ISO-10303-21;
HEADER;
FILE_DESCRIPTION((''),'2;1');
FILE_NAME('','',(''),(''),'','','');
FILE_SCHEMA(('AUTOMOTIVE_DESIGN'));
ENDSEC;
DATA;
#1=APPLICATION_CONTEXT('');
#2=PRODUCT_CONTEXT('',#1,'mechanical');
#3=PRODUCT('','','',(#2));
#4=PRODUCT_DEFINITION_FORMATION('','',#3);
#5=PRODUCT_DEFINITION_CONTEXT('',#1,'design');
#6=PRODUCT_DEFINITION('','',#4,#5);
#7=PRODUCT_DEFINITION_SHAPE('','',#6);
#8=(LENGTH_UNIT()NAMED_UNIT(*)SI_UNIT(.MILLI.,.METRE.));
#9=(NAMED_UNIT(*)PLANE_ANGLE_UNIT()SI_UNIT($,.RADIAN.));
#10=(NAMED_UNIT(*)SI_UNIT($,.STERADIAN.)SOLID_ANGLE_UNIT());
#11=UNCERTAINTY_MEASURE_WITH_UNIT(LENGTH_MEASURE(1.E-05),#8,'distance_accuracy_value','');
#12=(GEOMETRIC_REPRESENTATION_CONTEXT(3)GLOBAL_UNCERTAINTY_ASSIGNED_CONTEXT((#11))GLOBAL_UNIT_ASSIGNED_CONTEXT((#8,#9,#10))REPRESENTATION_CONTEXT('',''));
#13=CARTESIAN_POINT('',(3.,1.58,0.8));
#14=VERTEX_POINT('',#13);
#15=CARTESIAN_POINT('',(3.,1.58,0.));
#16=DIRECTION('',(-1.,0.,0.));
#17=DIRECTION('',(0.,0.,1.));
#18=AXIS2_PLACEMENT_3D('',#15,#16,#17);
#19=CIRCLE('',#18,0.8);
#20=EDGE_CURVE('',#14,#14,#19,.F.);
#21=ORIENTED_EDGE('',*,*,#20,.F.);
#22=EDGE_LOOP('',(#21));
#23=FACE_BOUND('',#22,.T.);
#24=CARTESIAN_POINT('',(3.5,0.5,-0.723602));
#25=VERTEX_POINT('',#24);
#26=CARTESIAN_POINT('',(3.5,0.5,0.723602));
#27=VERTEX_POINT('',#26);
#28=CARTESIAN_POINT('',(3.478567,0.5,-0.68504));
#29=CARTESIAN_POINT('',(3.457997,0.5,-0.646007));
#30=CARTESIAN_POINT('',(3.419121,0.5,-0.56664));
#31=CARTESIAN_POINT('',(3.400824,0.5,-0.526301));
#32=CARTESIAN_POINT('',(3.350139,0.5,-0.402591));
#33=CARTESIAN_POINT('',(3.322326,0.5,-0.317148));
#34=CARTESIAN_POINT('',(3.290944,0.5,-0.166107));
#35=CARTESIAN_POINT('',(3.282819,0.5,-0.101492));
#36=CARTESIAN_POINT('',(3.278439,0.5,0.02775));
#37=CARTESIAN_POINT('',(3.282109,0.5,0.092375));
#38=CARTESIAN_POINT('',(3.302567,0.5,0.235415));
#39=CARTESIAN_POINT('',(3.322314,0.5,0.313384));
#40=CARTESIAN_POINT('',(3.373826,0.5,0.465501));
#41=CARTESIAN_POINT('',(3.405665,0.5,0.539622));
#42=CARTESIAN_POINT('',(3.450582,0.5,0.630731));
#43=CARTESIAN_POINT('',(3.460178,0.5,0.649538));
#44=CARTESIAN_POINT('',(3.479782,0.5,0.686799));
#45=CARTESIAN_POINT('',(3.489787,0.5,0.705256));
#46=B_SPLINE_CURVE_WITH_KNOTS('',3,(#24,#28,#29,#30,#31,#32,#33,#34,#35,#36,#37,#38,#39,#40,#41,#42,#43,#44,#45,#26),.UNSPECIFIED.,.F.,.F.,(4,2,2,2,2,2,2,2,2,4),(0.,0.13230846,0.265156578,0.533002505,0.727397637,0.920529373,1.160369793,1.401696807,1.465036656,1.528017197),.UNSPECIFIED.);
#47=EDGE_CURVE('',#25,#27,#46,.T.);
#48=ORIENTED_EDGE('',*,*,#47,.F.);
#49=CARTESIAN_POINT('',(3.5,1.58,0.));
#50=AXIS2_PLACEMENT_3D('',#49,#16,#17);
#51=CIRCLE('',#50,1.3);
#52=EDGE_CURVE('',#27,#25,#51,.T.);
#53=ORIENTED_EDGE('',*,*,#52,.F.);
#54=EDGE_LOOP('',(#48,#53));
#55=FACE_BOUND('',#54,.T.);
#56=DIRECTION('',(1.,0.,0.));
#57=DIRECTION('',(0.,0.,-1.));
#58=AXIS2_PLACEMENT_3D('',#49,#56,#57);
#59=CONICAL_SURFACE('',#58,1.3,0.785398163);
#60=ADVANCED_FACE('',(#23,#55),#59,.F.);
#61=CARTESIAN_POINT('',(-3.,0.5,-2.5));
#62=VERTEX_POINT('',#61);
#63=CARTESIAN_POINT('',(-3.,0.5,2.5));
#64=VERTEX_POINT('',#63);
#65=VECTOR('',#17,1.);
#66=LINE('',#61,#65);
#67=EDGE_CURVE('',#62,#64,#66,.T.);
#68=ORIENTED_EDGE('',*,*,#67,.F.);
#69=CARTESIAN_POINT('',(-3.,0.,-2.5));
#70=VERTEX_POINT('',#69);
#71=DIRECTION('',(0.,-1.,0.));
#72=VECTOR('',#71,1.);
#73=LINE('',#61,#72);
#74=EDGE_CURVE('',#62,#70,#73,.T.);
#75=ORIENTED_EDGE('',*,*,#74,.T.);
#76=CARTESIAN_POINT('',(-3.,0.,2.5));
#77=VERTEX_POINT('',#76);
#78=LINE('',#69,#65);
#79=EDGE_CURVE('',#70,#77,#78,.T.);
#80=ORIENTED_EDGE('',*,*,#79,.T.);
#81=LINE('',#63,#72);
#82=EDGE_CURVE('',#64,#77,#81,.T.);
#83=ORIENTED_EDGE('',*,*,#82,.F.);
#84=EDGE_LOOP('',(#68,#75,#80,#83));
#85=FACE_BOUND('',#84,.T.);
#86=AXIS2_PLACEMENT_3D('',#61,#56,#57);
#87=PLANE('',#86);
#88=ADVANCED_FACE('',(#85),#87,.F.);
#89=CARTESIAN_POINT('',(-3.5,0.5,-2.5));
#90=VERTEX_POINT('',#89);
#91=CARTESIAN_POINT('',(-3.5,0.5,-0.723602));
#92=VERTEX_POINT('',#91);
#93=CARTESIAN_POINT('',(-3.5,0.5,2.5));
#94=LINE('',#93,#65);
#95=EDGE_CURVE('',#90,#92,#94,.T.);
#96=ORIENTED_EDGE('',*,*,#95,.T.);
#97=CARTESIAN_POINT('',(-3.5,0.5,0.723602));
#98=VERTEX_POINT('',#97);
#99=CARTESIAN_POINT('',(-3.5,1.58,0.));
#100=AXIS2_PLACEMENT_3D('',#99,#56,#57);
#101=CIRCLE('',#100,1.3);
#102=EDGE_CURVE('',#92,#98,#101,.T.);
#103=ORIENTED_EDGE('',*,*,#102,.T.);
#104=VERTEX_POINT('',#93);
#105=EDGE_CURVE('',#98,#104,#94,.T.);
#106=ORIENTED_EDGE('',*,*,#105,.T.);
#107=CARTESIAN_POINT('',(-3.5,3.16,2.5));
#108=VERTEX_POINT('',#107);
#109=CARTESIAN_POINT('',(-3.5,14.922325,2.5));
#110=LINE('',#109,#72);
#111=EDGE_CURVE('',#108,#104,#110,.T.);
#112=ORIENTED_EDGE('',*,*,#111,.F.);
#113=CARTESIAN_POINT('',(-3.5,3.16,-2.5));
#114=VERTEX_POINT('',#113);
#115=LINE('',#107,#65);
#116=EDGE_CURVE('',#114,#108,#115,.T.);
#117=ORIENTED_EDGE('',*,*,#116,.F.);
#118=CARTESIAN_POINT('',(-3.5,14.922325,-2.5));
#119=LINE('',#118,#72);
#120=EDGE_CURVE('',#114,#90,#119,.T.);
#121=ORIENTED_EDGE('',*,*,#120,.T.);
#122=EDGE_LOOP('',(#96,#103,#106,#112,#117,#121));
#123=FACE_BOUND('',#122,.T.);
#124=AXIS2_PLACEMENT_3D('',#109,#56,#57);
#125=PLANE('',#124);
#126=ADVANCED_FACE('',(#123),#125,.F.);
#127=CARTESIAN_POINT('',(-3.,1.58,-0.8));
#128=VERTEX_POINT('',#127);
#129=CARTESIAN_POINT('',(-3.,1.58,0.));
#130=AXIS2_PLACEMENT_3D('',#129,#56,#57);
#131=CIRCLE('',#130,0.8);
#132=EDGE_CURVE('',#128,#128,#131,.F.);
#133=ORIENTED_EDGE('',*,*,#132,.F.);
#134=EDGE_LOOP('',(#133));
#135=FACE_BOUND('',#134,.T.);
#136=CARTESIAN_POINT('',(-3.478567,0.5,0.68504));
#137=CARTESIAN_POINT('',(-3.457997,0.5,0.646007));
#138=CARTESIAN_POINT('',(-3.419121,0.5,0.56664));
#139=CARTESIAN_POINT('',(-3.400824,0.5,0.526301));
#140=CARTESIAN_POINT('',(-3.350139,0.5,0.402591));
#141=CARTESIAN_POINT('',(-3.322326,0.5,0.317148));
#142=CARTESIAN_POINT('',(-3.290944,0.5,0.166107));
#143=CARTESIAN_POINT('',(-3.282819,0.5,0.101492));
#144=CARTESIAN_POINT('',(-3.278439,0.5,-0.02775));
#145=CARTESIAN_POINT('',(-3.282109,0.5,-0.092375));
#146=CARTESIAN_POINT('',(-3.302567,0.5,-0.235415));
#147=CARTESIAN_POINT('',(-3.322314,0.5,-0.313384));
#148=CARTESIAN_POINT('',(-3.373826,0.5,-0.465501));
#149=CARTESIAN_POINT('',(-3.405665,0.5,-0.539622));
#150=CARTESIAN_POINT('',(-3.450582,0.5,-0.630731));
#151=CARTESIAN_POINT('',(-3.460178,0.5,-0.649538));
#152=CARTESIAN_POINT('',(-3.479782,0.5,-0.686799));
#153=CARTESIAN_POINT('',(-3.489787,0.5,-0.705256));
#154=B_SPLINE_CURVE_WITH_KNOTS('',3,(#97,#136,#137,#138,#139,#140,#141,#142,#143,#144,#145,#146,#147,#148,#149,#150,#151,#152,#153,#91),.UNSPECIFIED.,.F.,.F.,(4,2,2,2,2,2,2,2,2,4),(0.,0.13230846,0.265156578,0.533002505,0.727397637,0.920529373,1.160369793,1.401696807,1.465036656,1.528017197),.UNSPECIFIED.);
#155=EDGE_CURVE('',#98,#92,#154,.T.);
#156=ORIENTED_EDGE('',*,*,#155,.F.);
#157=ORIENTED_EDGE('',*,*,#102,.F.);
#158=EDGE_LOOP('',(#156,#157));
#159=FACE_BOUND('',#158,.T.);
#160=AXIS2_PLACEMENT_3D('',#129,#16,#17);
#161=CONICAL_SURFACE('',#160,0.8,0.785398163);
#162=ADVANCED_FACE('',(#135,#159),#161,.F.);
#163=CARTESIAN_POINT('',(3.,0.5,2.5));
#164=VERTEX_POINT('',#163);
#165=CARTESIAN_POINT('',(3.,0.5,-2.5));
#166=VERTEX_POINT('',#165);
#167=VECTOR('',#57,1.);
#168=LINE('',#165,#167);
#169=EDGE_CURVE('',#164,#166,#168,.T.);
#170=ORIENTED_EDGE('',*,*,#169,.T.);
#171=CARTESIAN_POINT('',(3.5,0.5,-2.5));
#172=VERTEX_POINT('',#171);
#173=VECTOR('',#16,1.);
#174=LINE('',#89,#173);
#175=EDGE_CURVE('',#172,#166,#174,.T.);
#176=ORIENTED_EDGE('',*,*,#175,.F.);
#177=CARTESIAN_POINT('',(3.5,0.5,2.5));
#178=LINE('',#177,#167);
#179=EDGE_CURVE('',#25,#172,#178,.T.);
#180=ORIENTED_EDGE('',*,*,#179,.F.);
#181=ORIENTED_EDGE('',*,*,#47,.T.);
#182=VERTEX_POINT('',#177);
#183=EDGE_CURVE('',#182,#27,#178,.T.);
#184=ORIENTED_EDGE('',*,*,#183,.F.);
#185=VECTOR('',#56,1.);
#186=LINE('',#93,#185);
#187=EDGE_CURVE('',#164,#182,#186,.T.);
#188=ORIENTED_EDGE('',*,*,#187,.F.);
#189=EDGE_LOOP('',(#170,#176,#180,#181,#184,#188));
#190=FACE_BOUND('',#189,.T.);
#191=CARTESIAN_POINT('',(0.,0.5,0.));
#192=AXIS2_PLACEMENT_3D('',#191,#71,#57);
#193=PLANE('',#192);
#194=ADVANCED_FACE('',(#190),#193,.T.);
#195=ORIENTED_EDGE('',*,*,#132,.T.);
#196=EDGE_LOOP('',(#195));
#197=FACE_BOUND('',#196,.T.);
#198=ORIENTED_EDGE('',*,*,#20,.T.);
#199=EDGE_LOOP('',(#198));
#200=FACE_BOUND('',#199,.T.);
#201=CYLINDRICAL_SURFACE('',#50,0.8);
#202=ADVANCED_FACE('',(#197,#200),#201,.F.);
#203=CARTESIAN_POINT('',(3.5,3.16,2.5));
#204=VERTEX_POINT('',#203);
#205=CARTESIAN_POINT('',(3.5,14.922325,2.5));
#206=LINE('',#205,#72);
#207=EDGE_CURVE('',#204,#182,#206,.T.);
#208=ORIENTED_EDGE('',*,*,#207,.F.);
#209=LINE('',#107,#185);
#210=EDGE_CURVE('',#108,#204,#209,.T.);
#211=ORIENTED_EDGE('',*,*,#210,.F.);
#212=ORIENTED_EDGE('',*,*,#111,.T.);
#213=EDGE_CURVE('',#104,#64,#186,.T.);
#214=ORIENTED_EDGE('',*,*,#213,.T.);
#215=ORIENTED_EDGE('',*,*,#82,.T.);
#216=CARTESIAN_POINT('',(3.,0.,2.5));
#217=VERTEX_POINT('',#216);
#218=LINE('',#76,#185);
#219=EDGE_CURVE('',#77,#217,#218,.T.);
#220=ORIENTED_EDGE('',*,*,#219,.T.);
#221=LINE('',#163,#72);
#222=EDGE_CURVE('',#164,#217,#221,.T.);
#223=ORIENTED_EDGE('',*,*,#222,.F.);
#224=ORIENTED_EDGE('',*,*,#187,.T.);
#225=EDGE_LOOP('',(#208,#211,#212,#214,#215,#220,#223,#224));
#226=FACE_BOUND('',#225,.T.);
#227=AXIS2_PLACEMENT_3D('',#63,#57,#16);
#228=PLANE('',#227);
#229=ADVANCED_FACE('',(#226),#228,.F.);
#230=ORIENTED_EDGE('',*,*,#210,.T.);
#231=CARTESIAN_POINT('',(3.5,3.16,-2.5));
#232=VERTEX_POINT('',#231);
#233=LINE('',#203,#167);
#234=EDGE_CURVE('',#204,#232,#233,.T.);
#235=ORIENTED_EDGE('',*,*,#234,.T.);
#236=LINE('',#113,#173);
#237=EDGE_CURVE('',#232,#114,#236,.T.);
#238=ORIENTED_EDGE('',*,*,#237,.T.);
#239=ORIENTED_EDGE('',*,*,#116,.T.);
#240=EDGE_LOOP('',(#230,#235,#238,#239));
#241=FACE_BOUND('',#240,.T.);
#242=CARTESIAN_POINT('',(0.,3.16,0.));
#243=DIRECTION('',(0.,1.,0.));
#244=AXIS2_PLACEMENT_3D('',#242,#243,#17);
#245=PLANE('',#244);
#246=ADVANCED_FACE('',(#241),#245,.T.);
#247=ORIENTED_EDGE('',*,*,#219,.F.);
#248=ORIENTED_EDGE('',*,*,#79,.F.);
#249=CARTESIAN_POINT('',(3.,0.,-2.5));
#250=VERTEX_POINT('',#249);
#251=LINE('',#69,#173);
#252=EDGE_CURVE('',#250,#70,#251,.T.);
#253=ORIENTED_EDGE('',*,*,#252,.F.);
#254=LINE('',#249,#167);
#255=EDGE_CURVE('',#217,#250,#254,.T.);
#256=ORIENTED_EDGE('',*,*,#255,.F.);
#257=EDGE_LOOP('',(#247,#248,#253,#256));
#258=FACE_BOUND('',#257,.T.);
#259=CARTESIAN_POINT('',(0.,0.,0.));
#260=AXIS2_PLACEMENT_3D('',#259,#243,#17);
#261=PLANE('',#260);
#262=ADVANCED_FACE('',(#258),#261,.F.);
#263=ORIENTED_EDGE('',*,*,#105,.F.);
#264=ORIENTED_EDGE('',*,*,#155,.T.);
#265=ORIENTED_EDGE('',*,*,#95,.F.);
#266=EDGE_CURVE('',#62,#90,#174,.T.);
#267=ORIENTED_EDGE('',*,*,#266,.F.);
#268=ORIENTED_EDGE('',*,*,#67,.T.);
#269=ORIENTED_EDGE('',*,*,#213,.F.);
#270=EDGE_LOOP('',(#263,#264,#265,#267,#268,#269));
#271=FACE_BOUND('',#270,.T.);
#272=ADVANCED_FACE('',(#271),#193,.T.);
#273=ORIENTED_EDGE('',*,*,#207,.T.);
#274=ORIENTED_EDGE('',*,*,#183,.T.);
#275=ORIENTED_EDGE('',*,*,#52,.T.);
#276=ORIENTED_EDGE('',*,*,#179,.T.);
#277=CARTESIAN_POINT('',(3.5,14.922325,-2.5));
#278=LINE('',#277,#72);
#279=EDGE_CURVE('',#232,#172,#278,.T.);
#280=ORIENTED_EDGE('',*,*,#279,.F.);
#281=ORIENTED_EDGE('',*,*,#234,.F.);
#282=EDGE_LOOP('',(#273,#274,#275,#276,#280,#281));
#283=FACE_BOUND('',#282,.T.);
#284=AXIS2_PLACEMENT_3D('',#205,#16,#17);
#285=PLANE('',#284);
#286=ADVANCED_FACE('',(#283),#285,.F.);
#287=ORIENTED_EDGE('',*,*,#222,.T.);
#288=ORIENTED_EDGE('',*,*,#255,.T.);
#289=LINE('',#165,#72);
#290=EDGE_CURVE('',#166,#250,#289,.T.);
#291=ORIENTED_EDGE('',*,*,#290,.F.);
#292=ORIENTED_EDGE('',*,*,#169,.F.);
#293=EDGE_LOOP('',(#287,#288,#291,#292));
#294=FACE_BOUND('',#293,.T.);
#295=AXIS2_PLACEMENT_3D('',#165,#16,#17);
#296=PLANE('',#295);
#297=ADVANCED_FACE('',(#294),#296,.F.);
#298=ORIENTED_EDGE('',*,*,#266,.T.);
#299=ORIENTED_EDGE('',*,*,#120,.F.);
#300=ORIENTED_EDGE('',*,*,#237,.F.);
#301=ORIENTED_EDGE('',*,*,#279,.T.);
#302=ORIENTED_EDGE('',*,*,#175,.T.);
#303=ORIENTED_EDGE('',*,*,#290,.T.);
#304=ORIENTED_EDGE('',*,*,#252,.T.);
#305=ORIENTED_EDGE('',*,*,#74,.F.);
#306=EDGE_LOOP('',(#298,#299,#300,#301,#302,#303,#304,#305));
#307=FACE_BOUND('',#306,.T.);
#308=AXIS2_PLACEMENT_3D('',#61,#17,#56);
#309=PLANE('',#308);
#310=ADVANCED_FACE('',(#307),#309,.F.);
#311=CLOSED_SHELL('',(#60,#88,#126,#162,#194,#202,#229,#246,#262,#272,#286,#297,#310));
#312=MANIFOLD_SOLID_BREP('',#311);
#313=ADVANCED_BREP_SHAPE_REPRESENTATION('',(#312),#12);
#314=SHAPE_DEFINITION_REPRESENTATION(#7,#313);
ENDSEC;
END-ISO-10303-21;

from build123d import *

# Parameters (mm, degrees)
SKETCH1_W           = 6
SKETCH1_H           = 5
BOSS_EXTRUDE1_DEPTH = 0.5
SKETCH2_W           = 7
SKETCH2_H           = 5
BOSS_EXTRUDE2_DEPTH = 2.66
SKETCH3_R           = 0.8
CUT_EXTRUDE1_DEPTH  = 9.076855824
CHAMFER1_SIZE       = 0.5


with BuildPart() as part:
    # Sketch1 → Boss-Extrude1 (new body)
    with BuildSketch(Plane(origin=(0, 0, 0), x_dir=(1, 0, 0), z_dir=(0, 1, 0))):
        Rectangle(SKETCH1_W, SKETCH1_H)
    extrude(amount=BOSS_EXTRUDE1_DEPTH)

    # Sketch2 → Boss-Extrude2 (add)
    with BuildSketch(Plane(origin=(0, 0.5, 0), x_dir=(1, 0, 0), z_dir=(0, 1, 0))):
        Rectangle(SKETCH2_W, SKETCH2_H)
    extrude(amount=BOSS_EXTRUDE2_DEPTH)

    # Sketch3 → Cut-Extrude1 (cut, through all)
    with BuildSketch(Plane.ZY.offset(3.5)):
        with Locations((0, 1.58)):
            Circle(SKETCH3_R)
    extrude(amount=-CUT_EXTRUDE1_DEPTH, mode=Mode.SUBTRACT)

    # Chamfer1
    # the kernel refuses this chamfer: 0.5 mm, written as the material it takes off along each edge
    with BuildSketch(Plane(origin=(3.5, 1.58, 0), x_dir=(0, 0, 1), z_dir=(0, -1, 0))) as chamfer1_piece_1:
        Polygon((0.8 + CHAMFER1_SIZE, 0), (0.8, CHAMFER1_SIZE), (0.8, 0), align=None)
    revolve(axis=Axis((3.5, 1.58, 0), (-1, 0, 0)), mode=Mode.SUBTRACT)
    with BuildSketch(Plane(origin=(-3.5, 1.58, 0), x_dir=(0, 0, 1), z_dir=(0, -1, 0))) as chamfer1_piece_2:
        Polygon((0.8 + CHAMFER1_SIZE, 0), (0.8, -CHAMFER1_SIZE), (0.8, 0), align=None)
    revolve(axis=Axis((-3.5, 1.58, 0), (-1, 0, 0)), mode=Mode.SUBTRACT)


solid = part.part
